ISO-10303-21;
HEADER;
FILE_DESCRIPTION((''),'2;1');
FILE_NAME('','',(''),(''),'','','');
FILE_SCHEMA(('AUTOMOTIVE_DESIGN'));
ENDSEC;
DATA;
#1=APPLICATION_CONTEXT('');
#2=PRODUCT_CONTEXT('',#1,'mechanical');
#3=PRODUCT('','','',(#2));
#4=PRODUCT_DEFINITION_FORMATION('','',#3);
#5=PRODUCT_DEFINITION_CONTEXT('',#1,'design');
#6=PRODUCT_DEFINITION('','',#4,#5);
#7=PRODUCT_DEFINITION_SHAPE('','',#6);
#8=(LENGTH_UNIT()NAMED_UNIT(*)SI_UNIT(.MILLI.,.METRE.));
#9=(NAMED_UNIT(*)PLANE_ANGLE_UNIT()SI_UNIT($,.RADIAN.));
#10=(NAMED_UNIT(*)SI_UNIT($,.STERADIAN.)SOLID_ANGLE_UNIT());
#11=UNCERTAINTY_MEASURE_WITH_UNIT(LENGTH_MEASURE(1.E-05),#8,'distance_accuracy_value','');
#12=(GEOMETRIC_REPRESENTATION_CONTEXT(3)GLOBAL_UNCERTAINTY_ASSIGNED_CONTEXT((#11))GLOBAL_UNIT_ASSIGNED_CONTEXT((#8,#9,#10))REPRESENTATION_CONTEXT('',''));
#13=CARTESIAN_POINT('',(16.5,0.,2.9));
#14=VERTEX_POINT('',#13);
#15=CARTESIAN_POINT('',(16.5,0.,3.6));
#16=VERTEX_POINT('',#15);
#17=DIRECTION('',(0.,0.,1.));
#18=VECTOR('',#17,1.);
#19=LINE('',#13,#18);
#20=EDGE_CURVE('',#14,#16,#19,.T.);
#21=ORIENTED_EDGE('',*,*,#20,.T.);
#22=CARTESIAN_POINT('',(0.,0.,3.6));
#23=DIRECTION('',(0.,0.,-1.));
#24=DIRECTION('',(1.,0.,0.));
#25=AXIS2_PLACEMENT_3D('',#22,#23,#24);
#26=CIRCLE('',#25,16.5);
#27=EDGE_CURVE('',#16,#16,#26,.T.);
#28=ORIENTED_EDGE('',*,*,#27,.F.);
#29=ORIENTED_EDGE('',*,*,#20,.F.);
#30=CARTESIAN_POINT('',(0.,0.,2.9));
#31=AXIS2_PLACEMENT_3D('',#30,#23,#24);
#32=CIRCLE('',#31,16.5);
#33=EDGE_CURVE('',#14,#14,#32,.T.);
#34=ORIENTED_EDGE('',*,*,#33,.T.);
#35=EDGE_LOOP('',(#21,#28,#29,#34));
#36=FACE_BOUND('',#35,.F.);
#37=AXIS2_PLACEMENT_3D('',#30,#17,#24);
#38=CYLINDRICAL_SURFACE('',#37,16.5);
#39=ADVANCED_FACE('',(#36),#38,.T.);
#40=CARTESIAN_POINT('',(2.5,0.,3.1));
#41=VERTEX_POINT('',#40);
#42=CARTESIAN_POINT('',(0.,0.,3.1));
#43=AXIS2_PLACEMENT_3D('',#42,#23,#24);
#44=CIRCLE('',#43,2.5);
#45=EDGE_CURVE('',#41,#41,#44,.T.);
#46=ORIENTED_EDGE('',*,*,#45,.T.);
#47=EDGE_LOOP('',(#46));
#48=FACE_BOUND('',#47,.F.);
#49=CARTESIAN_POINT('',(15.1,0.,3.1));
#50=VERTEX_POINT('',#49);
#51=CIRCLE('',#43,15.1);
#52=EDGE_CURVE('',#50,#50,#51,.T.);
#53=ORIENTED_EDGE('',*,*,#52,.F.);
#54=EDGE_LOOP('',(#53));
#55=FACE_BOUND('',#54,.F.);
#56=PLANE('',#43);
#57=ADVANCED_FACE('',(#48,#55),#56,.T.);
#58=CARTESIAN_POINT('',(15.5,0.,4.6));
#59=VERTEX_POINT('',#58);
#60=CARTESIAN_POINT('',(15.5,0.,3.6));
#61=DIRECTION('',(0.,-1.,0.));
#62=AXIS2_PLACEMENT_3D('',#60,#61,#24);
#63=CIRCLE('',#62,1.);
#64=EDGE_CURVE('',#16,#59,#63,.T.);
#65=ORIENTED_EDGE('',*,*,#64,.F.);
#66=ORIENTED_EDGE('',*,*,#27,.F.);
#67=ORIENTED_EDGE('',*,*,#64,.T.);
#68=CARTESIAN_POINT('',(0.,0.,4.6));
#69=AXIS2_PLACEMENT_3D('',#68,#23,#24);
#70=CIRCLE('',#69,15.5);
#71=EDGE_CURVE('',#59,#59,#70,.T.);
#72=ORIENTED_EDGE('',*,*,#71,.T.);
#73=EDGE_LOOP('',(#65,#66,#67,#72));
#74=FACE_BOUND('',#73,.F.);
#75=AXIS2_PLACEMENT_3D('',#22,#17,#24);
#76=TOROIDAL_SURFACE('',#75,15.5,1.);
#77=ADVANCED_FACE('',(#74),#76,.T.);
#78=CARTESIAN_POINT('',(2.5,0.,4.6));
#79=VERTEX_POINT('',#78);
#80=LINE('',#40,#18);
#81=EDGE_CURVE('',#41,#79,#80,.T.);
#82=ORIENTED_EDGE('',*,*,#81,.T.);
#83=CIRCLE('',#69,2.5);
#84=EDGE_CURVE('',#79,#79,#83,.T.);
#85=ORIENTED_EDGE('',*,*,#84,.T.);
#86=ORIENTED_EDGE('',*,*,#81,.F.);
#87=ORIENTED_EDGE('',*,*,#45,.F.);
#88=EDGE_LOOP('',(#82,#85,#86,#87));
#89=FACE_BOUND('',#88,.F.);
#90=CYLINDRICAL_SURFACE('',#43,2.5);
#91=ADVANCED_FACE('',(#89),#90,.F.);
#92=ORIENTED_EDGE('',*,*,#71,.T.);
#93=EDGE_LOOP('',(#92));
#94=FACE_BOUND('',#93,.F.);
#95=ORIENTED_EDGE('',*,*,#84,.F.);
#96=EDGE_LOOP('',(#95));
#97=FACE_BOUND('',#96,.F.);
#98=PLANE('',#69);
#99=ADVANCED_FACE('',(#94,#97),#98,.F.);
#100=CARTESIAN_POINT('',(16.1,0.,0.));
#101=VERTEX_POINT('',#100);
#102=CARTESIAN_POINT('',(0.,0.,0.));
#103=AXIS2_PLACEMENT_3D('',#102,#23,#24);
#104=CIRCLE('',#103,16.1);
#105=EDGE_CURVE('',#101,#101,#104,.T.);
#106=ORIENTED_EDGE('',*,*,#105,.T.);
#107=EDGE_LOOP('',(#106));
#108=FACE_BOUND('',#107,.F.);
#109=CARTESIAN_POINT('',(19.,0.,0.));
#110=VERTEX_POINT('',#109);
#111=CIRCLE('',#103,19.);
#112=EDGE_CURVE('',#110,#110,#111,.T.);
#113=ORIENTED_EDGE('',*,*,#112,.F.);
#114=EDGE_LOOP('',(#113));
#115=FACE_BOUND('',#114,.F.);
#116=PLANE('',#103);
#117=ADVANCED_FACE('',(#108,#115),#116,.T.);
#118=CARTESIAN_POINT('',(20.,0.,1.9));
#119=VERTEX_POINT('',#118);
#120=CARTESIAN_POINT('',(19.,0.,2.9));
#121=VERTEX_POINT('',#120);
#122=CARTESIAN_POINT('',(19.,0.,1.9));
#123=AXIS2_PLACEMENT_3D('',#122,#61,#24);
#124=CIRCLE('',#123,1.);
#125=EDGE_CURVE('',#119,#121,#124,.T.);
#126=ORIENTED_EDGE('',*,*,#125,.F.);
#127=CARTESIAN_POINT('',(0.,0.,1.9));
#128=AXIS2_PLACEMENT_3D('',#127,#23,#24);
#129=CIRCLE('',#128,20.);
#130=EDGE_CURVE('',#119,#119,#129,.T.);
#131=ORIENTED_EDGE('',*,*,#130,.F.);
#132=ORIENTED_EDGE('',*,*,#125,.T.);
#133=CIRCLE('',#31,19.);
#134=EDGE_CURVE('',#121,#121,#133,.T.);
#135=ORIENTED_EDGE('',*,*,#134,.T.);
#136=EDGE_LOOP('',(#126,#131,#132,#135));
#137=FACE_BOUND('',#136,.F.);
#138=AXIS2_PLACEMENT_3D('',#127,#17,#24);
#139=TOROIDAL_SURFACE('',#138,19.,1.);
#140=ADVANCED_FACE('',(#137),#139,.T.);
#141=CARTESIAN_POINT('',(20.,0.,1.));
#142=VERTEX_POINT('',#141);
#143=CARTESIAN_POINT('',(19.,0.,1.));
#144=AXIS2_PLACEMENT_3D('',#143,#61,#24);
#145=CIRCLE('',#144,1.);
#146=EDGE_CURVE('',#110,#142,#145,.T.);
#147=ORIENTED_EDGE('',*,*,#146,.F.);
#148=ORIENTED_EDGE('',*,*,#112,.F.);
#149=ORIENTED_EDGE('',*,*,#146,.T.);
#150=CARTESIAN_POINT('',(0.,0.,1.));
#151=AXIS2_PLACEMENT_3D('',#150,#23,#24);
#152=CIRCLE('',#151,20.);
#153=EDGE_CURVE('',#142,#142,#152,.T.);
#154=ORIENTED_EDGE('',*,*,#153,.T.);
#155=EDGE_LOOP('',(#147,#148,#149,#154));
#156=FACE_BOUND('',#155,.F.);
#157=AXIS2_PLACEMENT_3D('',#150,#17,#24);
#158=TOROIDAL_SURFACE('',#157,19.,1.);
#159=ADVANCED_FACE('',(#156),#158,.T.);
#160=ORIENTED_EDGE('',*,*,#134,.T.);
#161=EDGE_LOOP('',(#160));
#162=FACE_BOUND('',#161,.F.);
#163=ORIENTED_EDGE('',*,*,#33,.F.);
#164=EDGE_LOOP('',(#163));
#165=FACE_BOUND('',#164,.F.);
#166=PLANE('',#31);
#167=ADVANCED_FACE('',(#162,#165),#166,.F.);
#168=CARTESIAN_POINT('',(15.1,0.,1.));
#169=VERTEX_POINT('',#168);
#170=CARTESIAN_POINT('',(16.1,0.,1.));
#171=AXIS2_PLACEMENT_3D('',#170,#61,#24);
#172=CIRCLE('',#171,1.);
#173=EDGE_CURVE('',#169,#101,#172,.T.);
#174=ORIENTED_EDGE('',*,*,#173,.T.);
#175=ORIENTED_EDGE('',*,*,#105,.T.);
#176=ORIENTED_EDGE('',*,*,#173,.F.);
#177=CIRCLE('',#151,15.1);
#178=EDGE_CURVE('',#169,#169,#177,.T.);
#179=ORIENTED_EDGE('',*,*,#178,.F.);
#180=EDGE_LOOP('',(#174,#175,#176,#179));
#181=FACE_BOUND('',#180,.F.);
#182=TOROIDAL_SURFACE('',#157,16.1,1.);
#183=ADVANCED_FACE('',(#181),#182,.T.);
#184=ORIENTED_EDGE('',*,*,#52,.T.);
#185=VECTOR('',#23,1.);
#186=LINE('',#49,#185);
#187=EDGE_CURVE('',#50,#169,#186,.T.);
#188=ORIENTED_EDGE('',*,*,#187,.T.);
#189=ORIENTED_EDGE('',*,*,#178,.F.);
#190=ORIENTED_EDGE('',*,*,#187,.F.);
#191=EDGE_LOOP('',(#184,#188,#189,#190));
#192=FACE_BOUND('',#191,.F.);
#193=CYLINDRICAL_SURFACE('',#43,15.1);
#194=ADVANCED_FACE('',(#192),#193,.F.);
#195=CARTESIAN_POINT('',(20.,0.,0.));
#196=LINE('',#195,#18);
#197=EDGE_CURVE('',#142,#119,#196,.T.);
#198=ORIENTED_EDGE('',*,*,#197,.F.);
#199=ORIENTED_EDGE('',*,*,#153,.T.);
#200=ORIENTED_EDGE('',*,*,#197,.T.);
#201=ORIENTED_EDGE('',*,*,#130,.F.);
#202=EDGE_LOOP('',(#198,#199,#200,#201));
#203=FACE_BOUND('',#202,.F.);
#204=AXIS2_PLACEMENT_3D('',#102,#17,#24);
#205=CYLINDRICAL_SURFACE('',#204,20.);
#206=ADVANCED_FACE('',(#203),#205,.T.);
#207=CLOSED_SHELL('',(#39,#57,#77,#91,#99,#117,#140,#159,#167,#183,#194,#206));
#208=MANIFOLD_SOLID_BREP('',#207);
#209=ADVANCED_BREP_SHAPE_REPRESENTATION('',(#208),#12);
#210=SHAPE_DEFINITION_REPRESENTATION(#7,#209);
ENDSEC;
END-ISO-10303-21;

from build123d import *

# Parameters (mm, degrees)
F2_R     = 1
F3_R     = 2.5
F4_DEPTH = 1.501


# Not quite as in the source:
# - a feature names something its author has since deleted; it is built from what else it names


with BuildPart() as f1:
    # F0 (on Front) → F1 (revolve)
    with BuildSketch(Plane.XZ):
        Polygon((15.1, 3.1), (15.1, 0), (20, 0), (20, 2.9), (16.5, 2.9), (16.5, 4.6), (0, 4.6), (0, 3.1), align=None)
    revolve(axis=Axis((0, 0, 3.0650238041), (0, 0, -1)))

    # F2
    f2_edges = [f1.edges().sort_by_distance(p)[0] for p in [
        (-15.1, 0, 0),
        (-20, 0, 0),
        (-16.5, 0, 4.6),
        (-20, 0, 2.9),
    ]]
    fillet(f2_edges, radius=F2_R)

    # F3 (on face) → F4 (cut, through all)
    with BuildSketch(Plane(origin=(0, 0, 3.1), x_dir=(1, 0, 0), z_dir=(0, 0, -1))):
        Circle(F3_R)
    extrude(amount=-F4_DEPTH, mode=Mode.SUBTRACT)


solid = f1.part
